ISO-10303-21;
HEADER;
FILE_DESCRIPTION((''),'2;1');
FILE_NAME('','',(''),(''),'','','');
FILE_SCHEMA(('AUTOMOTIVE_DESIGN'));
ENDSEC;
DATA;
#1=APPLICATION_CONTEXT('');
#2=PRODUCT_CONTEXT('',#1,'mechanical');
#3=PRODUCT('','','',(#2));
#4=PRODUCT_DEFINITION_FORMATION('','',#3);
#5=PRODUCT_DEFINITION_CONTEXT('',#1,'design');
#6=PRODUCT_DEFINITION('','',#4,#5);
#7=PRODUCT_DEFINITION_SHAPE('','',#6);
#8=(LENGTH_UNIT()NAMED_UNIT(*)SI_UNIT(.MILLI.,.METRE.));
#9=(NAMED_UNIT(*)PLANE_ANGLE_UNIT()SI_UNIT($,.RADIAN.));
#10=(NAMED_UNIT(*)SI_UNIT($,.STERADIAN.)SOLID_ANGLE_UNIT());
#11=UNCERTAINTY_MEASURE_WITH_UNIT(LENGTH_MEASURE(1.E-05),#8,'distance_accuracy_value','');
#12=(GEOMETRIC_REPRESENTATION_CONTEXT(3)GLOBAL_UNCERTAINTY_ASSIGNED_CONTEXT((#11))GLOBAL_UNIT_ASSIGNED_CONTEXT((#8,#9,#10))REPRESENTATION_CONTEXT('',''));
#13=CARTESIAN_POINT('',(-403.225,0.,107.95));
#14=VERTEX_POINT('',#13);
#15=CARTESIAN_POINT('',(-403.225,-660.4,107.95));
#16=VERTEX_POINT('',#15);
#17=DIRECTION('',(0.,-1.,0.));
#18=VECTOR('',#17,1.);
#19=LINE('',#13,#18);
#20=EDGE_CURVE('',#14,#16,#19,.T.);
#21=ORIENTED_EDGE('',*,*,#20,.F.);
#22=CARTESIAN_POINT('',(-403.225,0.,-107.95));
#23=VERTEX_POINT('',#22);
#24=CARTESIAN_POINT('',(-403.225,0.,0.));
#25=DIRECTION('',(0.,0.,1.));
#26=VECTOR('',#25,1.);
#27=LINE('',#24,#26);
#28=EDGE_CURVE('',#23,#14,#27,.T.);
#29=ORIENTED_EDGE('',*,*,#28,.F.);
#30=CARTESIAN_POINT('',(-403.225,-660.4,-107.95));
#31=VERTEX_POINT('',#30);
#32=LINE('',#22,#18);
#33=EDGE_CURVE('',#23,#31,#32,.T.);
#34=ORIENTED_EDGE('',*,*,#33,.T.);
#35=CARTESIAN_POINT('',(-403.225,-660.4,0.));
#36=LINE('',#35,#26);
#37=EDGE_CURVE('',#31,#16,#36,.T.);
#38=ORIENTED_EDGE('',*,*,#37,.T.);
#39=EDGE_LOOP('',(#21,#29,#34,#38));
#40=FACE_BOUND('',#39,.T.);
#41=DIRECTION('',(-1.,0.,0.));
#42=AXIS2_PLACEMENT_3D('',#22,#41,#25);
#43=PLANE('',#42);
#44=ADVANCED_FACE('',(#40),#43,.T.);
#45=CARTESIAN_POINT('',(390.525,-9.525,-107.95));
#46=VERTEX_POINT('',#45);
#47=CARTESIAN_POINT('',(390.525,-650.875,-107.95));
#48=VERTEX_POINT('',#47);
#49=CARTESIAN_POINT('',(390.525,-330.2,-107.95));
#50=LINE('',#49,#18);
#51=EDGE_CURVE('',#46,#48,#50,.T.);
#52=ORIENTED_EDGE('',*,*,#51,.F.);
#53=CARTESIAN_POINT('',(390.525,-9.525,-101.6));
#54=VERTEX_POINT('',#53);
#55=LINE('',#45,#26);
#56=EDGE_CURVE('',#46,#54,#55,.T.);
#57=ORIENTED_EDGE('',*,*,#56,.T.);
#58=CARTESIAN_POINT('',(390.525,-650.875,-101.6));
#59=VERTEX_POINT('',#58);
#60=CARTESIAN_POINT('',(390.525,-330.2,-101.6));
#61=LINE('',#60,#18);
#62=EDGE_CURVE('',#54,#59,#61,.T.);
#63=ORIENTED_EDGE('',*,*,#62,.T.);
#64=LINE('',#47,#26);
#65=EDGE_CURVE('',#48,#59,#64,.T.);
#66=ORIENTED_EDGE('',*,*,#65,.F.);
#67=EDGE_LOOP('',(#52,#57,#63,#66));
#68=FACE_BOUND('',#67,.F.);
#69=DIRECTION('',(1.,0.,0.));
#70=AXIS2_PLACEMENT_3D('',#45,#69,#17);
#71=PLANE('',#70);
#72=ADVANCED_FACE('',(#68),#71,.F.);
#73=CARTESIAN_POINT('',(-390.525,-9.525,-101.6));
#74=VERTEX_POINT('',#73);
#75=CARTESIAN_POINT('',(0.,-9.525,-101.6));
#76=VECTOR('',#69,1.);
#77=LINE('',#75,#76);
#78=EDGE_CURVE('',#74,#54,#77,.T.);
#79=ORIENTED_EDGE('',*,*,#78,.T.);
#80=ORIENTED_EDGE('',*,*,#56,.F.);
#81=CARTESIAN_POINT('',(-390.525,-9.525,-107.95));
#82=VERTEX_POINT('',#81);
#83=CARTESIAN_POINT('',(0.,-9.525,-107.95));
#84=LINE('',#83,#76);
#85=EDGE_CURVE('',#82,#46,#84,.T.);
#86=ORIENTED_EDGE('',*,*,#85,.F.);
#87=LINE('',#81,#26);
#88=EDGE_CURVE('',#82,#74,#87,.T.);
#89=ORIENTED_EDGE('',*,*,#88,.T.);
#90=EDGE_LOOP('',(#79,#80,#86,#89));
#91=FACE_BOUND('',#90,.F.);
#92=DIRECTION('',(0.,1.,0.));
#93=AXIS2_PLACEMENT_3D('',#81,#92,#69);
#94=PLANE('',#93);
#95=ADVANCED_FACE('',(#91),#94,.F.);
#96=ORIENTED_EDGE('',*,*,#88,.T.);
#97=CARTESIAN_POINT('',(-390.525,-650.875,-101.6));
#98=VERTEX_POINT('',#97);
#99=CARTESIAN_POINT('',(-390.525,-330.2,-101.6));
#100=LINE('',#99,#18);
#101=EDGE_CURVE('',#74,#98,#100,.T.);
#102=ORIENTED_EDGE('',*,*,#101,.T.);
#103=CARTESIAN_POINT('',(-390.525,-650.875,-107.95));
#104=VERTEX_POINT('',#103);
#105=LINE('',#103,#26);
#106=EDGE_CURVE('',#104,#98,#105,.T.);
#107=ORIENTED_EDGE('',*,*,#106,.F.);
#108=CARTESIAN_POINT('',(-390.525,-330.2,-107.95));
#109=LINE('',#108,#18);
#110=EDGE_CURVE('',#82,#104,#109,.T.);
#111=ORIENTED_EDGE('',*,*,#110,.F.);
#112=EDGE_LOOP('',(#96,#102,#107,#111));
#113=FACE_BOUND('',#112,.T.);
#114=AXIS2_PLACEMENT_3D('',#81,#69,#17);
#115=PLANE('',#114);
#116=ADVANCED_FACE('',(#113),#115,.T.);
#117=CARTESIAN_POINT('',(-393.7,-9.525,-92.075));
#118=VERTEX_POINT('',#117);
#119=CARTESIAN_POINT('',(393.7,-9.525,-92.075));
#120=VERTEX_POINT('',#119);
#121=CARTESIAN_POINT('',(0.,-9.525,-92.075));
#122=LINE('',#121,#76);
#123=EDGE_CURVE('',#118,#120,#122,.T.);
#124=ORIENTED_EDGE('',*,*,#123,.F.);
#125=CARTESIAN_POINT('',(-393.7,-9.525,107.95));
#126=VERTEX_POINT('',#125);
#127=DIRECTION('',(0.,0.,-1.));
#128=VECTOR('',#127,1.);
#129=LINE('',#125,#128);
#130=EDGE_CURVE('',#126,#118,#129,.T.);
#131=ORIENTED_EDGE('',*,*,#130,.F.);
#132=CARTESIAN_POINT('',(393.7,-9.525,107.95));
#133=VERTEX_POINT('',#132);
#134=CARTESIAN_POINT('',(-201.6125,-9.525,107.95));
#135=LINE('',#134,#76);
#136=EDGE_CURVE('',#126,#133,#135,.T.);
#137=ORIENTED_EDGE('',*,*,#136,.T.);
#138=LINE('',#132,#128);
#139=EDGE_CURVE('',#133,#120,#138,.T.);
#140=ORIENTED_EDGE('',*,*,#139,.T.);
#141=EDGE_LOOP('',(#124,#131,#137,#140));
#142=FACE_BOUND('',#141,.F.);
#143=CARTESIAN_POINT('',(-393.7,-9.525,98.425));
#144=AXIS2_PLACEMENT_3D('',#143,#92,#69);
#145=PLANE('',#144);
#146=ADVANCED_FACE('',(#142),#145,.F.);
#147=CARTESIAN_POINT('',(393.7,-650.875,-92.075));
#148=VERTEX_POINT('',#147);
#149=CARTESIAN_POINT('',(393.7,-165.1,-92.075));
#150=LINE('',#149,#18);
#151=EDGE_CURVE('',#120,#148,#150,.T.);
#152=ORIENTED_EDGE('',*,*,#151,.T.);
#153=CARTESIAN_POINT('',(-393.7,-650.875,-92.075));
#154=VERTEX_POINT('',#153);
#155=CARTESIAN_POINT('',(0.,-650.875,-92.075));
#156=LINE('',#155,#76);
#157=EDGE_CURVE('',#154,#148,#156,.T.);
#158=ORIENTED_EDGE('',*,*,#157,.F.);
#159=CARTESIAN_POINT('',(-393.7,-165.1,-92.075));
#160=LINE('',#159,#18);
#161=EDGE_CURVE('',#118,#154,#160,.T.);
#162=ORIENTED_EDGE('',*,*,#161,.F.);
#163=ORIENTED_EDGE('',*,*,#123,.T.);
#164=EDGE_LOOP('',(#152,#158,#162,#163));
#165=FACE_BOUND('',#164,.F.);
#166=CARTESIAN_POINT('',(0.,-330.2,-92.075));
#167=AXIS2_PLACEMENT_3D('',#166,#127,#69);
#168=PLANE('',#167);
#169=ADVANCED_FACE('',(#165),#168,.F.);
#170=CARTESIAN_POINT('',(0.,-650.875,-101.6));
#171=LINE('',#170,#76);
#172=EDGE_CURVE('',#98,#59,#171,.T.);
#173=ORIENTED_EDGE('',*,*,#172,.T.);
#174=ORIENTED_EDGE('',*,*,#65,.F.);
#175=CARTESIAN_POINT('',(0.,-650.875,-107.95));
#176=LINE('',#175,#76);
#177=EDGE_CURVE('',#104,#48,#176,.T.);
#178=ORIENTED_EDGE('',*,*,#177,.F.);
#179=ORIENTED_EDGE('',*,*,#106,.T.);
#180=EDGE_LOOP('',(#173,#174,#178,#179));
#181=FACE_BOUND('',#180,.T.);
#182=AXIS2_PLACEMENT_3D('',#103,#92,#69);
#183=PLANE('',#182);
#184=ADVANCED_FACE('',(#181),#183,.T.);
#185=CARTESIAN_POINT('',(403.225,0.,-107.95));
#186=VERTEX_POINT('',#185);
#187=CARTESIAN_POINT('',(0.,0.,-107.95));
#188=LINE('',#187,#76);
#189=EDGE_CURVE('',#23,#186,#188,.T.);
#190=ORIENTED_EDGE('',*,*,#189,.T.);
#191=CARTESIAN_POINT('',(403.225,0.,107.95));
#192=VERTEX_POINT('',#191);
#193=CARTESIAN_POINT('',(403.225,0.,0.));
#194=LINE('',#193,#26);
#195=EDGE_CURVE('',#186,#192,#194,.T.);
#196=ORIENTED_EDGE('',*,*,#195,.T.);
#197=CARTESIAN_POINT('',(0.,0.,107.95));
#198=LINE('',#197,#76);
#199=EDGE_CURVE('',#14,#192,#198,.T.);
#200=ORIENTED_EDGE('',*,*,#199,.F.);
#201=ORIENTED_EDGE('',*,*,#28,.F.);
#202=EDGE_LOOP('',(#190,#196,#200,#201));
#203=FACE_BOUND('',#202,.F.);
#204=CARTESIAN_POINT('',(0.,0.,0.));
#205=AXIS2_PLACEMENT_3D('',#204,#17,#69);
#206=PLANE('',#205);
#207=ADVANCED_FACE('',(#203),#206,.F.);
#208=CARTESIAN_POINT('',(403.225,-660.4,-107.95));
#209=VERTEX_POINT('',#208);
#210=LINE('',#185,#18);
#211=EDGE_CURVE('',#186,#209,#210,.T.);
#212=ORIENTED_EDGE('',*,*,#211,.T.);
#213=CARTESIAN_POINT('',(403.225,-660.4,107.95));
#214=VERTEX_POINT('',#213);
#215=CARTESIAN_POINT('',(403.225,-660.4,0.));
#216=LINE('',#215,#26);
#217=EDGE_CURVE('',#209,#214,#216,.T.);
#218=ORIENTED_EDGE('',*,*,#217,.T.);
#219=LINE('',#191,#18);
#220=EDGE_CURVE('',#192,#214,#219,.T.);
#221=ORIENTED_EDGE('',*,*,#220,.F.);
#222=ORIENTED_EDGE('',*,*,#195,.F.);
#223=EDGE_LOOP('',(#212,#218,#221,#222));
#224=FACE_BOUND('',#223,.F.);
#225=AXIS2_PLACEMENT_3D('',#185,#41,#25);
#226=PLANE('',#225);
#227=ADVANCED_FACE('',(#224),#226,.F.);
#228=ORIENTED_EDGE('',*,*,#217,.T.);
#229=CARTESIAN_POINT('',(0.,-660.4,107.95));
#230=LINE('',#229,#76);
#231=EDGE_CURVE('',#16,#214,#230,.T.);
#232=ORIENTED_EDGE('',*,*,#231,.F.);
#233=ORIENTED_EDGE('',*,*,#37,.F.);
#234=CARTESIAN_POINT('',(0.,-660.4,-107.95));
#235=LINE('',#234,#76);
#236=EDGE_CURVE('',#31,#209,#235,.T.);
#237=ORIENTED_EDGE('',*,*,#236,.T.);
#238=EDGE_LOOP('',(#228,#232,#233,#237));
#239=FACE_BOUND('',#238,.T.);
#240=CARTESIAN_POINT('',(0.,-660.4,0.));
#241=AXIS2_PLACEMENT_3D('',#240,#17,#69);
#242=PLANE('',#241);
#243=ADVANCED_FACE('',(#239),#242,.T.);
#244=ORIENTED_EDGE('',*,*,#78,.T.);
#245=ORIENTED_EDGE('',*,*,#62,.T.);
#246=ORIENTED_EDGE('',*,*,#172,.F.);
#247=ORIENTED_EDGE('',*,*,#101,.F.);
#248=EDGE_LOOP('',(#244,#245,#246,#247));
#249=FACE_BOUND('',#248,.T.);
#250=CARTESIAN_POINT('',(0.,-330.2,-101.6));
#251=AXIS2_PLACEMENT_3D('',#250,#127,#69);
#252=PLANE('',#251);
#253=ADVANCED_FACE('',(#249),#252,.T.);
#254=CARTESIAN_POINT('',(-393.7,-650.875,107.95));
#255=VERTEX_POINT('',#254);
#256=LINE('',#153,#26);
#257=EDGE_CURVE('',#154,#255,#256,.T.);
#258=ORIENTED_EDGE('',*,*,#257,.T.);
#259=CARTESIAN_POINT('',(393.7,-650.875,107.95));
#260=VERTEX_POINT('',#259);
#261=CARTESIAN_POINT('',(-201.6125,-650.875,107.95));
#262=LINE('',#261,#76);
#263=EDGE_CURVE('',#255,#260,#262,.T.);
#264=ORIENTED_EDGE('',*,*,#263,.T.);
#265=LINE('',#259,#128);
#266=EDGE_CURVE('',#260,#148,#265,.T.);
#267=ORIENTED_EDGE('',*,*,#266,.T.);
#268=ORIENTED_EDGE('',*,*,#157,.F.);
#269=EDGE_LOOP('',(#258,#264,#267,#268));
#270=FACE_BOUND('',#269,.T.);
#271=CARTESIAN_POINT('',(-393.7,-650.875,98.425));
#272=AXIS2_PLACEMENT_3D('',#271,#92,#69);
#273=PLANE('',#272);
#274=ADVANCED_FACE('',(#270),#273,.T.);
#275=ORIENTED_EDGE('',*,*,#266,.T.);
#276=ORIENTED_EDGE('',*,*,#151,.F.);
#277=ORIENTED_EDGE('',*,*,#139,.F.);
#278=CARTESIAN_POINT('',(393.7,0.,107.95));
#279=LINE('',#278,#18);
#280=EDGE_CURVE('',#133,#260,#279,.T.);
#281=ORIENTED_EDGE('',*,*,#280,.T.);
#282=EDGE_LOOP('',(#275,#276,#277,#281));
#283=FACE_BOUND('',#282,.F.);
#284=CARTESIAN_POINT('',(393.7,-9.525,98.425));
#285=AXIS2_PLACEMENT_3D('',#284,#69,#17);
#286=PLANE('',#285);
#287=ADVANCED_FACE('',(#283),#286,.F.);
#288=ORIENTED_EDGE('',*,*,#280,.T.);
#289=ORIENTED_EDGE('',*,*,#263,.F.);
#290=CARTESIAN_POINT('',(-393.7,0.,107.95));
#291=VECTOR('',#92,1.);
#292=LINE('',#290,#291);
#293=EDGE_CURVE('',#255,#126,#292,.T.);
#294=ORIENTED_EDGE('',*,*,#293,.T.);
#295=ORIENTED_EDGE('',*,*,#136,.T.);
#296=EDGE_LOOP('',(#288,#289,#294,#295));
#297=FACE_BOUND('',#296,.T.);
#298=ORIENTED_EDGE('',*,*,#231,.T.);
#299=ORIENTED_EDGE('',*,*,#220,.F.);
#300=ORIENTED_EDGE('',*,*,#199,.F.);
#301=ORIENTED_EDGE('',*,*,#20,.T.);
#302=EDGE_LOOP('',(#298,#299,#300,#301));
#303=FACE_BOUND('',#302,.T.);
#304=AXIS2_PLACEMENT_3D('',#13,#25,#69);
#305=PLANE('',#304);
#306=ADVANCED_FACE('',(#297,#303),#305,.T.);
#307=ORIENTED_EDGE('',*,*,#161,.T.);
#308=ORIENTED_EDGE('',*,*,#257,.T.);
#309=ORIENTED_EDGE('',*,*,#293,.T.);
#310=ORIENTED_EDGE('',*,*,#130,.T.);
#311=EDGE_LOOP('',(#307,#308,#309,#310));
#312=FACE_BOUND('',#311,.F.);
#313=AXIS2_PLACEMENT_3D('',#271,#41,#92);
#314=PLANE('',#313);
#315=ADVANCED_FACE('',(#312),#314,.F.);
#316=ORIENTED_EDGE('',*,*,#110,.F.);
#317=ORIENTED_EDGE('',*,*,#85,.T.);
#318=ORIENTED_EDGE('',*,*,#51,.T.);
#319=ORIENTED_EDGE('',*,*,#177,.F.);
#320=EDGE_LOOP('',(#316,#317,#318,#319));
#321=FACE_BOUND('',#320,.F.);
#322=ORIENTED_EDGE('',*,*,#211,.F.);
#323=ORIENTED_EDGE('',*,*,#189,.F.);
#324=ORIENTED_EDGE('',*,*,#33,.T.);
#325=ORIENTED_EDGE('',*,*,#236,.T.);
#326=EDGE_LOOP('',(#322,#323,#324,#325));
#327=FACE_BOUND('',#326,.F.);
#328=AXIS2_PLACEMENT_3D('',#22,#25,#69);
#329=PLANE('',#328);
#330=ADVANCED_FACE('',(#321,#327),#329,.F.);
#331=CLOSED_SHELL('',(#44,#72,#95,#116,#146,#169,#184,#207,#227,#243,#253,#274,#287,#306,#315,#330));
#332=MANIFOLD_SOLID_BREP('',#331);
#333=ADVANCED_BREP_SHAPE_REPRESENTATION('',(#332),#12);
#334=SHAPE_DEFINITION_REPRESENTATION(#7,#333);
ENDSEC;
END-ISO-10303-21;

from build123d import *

# Parameters (mm, degrees)
F0_W     = 806.45
F0_H     = 215.9
F1_DEPTH = 660.4
F2_W     = 781.05
F2_H     = 641.35
F3_DEPTH = 6.35
F4_T     = -9.525


# Not quite as in the source:
# - a shell that OpenCascade refuses in one call is made with other operations: the cavity is built on its own and cut out


with BuildPart() as f1:
    # F0 (on Front) → F1 (new body)
    with BuildSketch(Plane.XZ):
        Rectangle(F0_W, F0_H)
    extrude(amount=F1_DEPTH)

    # F2 (on face) → F3 (cut)
    with BuildSketch(Plane(origin=(0, 0, -107.95), x_dir=(1, 0, 0), z_dir=(0, 0, -1))):
        with Locations((0, 330.2)):
            Rectangle(F2_W, F2_H)
    extrude(amount=-F3_DEPTH, mode=Mode.SUBTRACT)

    # F4: a shell. OpenCascade refuses it in one call, so the cavity is built on its own and cut out:
    # the body offset inwards by the wall thickness, plus a prism from it out through each open face.
    f4_core = offset(f1.part, amount=F4_T, kind=Kind.INTERSECTION, mode=Mode.PRIVATE)
    f4_exits = [f4_core.faces().sort_by_distance(p)[0] for p in [
        (0, -330.2, 98.425),
    ]]
    add(f4_core, mode=Mode.SUBTRACT)
    extrude(f4_exits, amount=-F4_T, mode=Mode.SUBTRACT)


solid = f1.part
